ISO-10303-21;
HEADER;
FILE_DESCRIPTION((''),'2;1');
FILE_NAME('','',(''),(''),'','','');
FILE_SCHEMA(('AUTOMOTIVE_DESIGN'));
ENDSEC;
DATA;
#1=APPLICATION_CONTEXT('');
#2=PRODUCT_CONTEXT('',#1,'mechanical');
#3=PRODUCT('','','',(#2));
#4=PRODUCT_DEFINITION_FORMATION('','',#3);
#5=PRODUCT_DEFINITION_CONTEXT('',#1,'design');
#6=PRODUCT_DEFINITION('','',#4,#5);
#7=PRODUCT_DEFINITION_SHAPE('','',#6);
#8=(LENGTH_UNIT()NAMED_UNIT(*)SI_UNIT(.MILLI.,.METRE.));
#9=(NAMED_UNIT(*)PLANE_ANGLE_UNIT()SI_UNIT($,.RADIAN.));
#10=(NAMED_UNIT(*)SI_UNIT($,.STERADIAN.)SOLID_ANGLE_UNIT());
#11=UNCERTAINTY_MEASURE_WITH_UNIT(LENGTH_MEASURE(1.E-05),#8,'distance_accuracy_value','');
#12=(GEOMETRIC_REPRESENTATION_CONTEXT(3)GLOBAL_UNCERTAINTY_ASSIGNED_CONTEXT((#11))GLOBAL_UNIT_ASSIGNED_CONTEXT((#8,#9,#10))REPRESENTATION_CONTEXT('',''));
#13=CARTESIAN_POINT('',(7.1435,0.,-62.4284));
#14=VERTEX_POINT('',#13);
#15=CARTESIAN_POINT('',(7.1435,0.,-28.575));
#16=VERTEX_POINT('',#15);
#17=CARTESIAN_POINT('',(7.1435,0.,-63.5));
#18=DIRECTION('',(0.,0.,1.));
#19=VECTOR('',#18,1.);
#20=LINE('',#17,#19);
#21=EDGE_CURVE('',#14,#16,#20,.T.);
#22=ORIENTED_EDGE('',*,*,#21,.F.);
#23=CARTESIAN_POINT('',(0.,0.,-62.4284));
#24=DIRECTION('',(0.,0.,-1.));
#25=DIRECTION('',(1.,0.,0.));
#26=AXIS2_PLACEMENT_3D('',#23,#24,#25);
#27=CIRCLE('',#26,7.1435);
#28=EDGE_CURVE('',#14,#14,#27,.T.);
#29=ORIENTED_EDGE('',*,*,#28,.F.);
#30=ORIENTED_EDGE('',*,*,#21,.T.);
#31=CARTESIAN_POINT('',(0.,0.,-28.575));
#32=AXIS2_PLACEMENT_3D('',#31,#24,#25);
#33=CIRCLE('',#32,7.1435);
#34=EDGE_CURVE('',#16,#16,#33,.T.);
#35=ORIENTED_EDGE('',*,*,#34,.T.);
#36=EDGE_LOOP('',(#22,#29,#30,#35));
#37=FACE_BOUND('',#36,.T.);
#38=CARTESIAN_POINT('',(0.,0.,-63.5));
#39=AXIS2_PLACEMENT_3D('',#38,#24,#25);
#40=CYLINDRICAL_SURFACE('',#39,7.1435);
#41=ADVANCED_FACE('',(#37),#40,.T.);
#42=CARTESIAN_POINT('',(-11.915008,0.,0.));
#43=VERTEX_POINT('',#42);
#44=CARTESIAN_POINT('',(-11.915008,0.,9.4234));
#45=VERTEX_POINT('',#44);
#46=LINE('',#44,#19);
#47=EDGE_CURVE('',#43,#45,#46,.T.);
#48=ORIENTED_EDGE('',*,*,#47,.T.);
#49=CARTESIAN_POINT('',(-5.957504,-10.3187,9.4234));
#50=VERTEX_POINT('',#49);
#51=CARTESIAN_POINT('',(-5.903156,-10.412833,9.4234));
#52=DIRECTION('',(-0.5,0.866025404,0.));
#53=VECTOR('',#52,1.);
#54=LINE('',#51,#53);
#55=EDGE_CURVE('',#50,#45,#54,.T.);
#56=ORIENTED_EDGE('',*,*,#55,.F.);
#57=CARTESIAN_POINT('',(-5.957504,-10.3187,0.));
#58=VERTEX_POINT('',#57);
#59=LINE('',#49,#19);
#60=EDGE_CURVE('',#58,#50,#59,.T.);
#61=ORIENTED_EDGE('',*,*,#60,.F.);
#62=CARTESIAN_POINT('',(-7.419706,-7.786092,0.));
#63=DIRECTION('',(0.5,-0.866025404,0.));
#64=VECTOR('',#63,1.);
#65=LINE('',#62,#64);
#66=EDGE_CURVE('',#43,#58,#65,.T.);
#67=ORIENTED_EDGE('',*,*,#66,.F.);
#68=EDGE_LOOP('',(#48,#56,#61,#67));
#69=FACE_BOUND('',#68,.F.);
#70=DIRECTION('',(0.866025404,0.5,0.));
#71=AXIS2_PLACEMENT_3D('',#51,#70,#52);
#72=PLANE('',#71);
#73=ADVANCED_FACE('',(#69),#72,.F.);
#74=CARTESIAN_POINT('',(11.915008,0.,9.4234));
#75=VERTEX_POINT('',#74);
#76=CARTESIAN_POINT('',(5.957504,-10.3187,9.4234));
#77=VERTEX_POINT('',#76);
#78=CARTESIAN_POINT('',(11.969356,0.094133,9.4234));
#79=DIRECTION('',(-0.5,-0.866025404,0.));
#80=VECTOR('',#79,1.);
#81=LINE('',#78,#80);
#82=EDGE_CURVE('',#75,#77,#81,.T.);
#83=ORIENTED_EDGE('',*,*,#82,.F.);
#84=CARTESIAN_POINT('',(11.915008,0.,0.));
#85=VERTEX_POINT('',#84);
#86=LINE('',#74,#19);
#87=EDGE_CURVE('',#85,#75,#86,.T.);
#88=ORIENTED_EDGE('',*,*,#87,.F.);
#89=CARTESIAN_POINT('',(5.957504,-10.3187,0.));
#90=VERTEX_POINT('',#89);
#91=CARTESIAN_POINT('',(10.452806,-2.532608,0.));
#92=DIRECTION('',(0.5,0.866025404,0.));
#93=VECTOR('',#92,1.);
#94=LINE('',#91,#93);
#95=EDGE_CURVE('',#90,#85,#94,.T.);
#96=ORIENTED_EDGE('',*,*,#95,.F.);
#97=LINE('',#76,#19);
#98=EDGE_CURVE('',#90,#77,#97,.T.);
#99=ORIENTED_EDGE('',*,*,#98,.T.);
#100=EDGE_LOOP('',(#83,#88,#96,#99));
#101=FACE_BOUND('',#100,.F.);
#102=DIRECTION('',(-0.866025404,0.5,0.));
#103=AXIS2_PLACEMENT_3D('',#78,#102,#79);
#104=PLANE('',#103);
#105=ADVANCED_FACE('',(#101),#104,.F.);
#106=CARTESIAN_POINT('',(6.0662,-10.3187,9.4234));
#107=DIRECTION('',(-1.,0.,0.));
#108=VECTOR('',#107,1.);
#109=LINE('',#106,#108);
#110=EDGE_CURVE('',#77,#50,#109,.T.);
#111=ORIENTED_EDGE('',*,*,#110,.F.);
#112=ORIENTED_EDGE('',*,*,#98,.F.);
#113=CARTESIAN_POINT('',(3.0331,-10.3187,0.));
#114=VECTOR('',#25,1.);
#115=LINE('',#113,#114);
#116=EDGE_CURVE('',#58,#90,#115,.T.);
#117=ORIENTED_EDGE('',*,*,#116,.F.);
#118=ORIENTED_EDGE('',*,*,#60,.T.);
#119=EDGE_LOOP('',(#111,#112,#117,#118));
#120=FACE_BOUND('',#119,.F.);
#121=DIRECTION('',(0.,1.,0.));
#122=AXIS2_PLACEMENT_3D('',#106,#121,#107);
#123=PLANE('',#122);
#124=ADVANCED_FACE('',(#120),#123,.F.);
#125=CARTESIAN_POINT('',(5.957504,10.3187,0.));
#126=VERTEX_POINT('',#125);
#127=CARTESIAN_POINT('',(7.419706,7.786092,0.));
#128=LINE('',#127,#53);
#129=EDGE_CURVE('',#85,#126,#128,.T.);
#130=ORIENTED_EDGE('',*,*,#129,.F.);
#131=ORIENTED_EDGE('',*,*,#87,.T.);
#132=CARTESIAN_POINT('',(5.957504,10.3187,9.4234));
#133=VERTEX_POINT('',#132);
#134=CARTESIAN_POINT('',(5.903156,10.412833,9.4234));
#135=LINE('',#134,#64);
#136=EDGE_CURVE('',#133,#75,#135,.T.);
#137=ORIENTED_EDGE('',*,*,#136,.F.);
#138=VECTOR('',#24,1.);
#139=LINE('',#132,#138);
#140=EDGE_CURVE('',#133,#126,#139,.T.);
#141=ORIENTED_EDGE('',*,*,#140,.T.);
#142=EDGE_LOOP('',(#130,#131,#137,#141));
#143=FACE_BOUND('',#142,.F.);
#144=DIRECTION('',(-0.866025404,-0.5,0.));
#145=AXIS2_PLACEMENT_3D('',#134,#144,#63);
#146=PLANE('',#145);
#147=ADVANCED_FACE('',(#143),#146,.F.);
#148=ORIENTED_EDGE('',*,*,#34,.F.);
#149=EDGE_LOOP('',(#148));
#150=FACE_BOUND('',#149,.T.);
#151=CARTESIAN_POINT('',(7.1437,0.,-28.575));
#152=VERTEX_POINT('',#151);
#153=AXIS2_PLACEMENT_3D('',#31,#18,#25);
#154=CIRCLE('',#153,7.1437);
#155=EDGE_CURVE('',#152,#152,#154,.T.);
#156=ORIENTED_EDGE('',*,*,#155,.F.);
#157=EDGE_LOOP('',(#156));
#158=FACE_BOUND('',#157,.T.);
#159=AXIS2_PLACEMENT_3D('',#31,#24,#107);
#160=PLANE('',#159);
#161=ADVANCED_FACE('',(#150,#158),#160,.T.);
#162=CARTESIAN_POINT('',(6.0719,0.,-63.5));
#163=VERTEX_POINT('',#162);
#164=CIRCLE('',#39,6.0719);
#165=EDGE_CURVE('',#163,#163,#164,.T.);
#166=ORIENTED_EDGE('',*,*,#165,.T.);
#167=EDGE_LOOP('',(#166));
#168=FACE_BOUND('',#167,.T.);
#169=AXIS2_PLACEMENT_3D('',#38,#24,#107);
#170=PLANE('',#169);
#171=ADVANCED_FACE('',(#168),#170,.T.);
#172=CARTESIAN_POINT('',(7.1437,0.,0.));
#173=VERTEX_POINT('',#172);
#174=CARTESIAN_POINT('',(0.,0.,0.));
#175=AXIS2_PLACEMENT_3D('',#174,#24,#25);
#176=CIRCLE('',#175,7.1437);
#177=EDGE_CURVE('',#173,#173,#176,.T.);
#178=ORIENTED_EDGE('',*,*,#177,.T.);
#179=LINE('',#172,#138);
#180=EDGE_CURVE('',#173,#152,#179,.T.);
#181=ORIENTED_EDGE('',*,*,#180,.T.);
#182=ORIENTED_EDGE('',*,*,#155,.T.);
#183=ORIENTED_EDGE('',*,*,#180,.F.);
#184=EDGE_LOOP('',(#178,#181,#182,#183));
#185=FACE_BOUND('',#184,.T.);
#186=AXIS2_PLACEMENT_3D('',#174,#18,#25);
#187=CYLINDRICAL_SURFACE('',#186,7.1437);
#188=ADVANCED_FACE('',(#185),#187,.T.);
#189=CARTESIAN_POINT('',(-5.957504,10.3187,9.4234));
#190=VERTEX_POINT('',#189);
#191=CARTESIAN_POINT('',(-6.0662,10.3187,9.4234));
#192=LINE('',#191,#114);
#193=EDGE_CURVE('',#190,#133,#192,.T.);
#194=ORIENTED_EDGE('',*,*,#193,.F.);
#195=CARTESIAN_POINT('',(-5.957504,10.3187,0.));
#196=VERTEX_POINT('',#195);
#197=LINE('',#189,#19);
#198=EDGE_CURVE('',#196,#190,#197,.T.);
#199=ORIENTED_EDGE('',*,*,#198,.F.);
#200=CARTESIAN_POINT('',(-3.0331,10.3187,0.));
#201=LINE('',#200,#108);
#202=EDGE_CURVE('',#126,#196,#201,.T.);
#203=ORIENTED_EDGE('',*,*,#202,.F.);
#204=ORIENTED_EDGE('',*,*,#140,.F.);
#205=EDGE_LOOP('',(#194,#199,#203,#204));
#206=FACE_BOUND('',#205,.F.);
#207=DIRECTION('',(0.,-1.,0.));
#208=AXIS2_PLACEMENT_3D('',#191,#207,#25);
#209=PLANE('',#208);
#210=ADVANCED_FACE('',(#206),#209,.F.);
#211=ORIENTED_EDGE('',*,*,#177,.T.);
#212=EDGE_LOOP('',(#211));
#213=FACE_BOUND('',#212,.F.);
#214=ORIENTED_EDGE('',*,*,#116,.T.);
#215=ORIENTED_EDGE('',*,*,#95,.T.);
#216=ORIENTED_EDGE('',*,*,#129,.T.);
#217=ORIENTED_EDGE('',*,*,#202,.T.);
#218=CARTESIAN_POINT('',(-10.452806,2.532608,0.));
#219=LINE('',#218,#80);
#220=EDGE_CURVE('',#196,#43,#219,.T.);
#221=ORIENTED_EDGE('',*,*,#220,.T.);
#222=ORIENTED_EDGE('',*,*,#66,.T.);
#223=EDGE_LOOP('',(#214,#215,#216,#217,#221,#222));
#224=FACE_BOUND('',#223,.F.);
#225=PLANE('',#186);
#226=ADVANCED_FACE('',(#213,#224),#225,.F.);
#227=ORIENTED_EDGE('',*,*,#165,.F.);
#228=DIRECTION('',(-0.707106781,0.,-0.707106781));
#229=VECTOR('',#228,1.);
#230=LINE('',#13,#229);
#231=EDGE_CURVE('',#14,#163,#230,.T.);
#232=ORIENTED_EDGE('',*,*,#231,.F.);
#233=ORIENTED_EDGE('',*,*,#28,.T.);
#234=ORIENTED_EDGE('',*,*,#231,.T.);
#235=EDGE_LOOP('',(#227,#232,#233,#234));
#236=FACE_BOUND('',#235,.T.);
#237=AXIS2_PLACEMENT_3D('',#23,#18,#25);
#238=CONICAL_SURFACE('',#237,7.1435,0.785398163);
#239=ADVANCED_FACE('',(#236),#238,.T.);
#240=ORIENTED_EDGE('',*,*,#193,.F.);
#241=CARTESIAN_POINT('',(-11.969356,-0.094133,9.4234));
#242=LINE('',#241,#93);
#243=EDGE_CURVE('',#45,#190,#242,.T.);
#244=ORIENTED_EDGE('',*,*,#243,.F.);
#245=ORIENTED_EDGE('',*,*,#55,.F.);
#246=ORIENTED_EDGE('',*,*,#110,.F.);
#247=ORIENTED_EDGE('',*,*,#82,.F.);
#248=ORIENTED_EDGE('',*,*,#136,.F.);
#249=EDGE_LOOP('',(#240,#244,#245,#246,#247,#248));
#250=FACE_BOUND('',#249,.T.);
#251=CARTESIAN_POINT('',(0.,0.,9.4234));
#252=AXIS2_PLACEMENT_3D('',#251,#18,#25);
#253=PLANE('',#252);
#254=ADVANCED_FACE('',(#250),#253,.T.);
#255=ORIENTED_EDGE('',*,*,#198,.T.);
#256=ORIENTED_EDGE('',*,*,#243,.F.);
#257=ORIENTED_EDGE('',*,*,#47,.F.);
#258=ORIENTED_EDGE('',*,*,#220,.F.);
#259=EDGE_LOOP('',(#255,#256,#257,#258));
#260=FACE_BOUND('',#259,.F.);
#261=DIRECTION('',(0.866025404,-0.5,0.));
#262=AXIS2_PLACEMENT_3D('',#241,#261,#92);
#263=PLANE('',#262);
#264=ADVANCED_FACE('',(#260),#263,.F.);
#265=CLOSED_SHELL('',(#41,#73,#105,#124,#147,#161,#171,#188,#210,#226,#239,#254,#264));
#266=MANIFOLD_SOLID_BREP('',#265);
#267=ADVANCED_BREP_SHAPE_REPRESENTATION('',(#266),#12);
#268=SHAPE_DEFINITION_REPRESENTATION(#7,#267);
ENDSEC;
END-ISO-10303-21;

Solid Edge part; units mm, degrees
sketch "Sketch1" plane through (0, 0, 0) normal (0, 0, 1) x (1, 0, 0)
  circle A0 centre (0, 0) radius 11.9697
  dimension "D1" = 23.9395
extrude "Protrusion1" add sketch "Sketch1" along normal blind 9.4234
sketch "Sketch2" plane through (0, 0, 0) normal (0, 0, -1) x (1, 0, 0)
  circle A0 centre (0, 0) radius 7.1437
extrude "Protrusion2" add sketch "Sketch2" along normal blind 63.5
sketch "Sketch3" plane through (0, 0, -63.5) normal (0, 0, -1) x (1, 0, 0)
  circle A0 centre (0, 0) radius 7.1435
extrude "Cutout1" cut sketch "Sketch3" against normal blind 34.925 flip side to cut
chamfer "Chamfer_1" distance 1.0716 angle 45 1 edges at (-7.1435, 0, -63.5)
sketch "Sketch4" plane through (0, 0, 9.4234) normal (0, 0, 1) x (1, 0, 0)
  line L0 (-6.0662, 10.3187) -> (6.0662, 10.3187)
  dimension "D1" = 20.6375
extrude "Cutout2" cut sketch "Sketch4" against normal up to next material side at (0, 10.3687, 9.4234)
pattern_circular "Pattern1" count 6 over 360 about axis through (0, 0, 9.4234) along (0, 0, 1) of "Cutout2"
properties part number "24101173"
